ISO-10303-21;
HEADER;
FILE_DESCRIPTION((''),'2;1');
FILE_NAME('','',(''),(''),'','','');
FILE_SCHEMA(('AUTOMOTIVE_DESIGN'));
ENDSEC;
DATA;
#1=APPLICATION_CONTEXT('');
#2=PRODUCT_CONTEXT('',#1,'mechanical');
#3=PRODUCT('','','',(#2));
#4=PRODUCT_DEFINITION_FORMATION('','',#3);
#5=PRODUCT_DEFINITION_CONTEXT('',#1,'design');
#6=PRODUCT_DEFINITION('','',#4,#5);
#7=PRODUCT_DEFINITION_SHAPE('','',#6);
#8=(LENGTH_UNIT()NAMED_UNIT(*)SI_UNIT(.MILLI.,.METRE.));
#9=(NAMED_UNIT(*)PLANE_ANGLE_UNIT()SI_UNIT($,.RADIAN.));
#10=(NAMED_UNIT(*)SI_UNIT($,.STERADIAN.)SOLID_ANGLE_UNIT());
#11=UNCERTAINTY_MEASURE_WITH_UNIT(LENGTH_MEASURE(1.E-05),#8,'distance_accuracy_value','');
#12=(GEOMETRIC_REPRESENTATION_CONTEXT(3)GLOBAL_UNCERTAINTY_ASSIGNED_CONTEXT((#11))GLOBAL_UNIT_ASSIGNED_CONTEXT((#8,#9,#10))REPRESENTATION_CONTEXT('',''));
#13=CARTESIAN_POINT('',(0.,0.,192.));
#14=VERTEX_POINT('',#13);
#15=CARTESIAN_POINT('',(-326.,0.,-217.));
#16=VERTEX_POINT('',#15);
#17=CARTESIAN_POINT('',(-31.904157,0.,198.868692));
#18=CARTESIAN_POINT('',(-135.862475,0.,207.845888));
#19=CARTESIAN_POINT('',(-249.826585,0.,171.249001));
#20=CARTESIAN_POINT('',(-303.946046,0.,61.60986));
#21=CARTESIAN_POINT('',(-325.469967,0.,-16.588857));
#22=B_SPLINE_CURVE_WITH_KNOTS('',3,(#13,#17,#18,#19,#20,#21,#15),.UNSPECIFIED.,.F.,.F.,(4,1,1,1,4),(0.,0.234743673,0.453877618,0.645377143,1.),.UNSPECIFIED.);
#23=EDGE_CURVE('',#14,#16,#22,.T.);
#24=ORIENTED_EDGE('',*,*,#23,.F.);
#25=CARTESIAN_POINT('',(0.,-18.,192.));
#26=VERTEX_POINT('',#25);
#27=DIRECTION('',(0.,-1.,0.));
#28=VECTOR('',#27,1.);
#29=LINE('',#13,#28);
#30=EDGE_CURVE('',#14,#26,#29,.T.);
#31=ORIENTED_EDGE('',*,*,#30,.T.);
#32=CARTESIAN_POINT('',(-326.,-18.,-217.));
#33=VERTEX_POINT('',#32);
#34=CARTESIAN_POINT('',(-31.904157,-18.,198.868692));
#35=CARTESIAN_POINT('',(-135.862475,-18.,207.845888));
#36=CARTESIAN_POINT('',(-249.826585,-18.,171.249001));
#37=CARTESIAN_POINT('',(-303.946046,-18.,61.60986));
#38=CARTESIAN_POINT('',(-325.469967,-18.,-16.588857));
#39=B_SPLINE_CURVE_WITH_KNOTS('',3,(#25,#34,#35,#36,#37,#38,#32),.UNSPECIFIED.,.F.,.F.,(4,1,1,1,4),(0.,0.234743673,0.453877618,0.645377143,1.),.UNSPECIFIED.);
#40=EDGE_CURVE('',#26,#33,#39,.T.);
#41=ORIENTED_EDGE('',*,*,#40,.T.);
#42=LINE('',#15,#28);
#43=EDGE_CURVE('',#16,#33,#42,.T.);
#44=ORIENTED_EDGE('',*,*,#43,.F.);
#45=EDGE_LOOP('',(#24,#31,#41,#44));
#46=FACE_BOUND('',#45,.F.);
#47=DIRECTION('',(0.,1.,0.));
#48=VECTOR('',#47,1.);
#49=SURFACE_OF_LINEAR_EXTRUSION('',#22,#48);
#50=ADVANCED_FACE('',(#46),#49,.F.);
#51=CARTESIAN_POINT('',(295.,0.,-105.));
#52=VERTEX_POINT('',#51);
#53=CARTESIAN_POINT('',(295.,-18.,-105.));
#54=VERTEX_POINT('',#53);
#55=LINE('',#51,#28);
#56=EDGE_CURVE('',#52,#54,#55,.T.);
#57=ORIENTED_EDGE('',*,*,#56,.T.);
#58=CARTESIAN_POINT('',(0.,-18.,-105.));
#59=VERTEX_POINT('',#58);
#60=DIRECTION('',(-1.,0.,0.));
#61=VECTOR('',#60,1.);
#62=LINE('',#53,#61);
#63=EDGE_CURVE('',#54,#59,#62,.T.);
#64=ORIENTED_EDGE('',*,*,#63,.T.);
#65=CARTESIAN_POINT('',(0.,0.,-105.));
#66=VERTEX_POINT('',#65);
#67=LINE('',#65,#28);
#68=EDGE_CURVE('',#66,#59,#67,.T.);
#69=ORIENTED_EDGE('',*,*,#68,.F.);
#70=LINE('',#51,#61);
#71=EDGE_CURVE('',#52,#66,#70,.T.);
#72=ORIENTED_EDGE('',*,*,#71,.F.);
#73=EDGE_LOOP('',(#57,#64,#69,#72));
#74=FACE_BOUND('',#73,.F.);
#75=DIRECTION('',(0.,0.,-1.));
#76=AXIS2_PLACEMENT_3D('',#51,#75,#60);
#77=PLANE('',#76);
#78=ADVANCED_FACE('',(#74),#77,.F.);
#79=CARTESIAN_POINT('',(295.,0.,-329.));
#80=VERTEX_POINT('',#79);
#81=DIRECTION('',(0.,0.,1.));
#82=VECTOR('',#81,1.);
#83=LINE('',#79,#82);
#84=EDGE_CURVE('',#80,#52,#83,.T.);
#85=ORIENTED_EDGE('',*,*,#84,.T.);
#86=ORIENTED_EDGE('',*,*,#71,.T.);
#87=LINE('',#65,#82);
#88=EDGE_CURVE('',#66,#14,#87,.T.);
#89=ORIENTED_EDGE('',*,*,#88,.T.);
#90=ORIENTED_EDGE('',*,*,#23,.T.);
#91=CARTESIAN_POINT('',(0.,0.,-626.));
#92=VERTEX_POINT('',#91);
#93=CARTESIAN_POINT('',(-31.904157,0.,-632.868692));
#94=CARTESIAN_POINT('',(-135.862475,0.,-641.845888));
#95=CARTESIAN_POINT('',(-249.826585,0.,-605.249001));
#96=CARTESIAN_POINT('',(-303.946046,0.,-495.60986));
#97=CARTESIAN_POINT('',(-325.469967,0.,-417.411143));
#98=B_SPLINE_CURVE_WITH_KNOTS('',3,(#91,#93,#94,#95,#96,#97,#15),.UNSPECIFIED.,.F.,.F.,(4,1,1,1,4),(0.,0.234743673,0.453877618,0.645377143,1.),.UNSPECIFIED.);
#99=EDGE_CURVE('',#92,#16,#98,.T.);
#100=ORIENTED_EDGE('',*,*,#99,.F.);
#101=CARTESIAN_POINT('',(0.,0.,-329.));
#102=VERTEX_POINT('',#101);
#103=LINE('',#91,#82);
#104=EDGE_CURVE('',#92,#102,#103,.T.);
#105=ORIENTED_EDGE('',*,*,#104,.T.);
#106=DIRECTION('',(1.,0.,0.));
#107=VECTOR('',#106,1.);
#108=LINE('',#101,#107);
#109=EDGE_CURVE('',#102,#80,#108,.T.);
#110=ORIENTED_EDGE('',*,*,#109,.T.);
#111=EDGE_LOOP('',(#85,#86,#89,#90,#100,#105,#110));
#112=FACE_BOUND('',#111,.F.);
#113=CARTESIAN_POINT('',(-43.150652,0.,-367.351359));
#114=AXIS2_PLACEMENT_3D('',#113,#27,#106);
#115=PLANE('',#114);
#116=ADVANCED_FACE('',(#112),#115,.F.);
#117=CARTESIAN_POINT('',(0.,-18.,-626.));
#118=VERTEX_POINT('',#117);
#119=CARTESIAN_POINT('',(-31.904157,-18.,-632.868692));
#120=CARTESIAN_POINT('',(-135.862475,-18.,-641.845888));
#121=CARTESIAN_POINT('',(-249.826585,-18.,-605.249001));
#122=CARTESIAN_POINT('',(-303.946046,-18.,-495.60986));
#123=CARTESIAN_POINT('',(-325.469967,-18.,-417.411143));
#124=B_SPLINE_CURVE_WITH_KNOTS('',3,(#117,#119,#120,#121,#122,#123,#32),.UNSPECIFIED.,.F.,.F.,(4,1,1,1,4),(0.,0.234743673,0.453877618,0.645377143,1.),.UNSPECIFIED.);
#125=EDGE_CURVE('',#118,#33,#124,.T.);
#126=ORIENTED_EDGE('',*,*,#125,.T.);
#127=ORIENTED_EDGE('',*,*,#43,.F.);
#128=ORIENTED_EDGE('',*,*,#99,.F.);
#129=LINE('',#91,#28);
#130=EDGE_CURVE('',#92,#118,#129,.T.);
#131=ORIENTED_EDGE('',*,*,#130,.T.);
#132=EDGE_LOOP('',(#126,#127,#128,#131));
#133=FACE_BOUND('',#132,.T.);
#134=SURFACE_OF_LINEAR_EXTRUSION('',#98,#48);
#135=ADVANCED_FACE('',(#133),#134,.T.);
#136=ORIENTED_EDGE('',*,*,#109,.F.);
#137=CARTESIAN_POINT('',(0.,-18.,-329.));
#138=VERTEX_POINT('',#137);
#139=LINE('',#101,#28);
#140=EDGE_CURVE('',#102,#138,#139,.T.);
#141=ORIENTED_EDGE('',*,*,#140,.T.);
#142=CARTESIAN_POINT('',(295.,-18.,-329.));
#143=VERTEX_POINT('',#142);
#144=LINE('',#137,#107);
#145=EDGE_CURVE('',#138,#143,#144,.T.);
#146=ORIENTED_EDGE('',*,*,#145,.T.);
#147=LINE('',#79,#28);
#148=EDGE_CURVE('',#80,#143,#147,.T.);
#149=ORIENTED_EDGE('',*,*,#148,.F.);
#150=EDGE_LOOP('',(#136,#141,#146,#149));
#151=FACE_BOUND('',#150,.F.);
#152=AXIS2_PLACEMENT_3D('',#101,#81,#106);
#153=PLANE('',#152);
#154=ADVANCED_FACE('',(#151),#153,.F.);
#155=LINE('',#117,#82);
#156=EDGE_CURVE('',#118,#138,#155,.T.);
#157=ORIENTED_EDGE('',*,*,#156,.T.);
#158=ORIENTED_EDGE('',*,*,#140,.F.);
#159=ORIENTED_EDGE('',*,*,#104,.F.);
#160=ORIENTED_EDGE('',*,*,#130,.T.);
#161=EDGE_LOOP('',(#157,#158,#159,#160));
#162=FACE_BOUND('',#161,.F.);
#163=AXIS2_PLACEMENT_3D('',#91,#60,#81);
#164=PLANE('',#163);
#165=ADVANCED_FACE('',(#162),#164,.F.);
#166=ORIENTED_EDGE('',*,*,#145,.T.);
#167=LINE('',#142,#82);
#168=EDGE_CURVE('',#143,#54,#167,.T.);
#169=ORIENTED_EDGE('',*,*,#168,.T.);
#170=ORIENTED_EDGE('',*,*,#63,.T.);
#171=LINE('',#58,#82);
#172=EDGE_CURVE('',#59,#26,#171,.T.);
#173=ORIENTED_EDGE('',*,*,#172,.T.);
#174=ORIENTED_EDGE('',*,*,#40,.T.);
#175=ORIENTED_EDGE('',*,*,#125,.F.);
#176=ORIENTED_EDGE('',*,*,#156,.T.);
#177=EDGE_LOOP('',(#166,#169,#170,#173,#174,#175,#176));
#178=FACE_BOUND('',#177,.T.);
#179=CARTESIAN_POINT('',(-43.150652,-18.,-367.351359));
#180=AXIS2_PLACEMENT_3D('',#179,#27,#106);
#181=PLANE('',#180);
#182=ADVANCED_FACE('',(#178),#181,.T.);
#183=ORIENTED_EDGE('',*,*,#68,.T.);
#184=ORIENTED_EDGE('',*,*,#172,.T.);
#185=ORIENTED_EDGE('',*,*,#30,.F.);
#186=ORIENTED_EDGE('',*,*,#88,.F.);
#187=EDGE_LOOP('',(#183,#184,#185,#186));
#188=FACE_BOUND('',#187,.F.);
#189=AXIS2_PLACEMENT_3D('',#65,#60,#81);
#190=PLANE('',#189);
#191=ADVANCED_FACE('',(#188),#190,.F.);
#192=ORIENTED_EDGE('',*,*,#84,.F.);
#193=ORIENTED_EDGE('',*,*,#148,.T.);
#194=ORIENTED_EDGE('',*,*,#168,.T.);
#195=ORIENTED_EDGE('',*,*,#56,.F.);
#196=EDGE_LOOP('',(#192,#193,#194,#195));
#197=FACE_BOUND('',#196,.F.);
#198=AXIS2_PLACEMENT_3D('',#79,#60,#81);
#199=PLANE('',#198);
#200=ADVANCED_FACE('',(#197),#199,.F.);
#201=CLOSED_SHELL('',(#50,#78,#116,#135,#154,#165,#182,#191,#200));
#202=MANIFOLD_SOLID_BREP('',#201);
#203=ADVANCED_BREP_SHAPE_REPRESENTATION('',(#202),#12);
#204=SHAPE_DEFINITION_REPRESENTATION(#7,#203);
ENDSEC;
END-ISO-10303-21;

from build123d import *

# Parameters (mm, degrees)
F1_DEPTH = 18


# Not quite as in the source:
# - a feature of the source that left no trace in its solid (it failed there, or was rolled back) is left out


with BuildPart() as f1:
    # F0 (on Front) → F1 (new body)
    with BuildSketch(Plane.XZ):
        with BuildLine():
            Line((295, -217), (-326, -217))
            add(Edge.make_bspline(
                [(0, -626), (-31.9041572511, -632.8686919212), (-135.8624745728, -641.8458876021), (-249.8265846826, -605.2490014373), (-303.9460461433, -495.6098595325), (-325.4699671722, -417.4111427766), (-326, -217)],
                knots=[0, 0, 0, 0, 0.234743673, 0.4538776177, 0.6453771431, 1, 1, 1, 1], degree=3))
            Line((0, -626), (0, -329))
            Line((0, -329), (295, -329))
            Line((295, -329), (295, -217))
        make_face()
        with BuildLine():
            add(Edge.make_bspline(
                [(0, 192), (-31.9041572511, 198.8686919212), (-135.8624745728, 207.8458876021), (-249.8265846826, 171.2490014373), (-303.9460461433, 61.6098595325), (-325.4699671722, -16.5888572234), (-326, -217)],
                knots=[0, 0, 0, 0, 0.234743673, 0.4538776177, 0.6453771431, 1, 1, 1, 1], degree=3))
            Line((-326, -217), (295, -217))
            Line((295, -217), (295, -105))
            Line((295, -105), (0, -105))
            Line((0, -105), (0, 192))
        make_face()
    extrude(amount=F1_DEPTH)


solid = f1.part
